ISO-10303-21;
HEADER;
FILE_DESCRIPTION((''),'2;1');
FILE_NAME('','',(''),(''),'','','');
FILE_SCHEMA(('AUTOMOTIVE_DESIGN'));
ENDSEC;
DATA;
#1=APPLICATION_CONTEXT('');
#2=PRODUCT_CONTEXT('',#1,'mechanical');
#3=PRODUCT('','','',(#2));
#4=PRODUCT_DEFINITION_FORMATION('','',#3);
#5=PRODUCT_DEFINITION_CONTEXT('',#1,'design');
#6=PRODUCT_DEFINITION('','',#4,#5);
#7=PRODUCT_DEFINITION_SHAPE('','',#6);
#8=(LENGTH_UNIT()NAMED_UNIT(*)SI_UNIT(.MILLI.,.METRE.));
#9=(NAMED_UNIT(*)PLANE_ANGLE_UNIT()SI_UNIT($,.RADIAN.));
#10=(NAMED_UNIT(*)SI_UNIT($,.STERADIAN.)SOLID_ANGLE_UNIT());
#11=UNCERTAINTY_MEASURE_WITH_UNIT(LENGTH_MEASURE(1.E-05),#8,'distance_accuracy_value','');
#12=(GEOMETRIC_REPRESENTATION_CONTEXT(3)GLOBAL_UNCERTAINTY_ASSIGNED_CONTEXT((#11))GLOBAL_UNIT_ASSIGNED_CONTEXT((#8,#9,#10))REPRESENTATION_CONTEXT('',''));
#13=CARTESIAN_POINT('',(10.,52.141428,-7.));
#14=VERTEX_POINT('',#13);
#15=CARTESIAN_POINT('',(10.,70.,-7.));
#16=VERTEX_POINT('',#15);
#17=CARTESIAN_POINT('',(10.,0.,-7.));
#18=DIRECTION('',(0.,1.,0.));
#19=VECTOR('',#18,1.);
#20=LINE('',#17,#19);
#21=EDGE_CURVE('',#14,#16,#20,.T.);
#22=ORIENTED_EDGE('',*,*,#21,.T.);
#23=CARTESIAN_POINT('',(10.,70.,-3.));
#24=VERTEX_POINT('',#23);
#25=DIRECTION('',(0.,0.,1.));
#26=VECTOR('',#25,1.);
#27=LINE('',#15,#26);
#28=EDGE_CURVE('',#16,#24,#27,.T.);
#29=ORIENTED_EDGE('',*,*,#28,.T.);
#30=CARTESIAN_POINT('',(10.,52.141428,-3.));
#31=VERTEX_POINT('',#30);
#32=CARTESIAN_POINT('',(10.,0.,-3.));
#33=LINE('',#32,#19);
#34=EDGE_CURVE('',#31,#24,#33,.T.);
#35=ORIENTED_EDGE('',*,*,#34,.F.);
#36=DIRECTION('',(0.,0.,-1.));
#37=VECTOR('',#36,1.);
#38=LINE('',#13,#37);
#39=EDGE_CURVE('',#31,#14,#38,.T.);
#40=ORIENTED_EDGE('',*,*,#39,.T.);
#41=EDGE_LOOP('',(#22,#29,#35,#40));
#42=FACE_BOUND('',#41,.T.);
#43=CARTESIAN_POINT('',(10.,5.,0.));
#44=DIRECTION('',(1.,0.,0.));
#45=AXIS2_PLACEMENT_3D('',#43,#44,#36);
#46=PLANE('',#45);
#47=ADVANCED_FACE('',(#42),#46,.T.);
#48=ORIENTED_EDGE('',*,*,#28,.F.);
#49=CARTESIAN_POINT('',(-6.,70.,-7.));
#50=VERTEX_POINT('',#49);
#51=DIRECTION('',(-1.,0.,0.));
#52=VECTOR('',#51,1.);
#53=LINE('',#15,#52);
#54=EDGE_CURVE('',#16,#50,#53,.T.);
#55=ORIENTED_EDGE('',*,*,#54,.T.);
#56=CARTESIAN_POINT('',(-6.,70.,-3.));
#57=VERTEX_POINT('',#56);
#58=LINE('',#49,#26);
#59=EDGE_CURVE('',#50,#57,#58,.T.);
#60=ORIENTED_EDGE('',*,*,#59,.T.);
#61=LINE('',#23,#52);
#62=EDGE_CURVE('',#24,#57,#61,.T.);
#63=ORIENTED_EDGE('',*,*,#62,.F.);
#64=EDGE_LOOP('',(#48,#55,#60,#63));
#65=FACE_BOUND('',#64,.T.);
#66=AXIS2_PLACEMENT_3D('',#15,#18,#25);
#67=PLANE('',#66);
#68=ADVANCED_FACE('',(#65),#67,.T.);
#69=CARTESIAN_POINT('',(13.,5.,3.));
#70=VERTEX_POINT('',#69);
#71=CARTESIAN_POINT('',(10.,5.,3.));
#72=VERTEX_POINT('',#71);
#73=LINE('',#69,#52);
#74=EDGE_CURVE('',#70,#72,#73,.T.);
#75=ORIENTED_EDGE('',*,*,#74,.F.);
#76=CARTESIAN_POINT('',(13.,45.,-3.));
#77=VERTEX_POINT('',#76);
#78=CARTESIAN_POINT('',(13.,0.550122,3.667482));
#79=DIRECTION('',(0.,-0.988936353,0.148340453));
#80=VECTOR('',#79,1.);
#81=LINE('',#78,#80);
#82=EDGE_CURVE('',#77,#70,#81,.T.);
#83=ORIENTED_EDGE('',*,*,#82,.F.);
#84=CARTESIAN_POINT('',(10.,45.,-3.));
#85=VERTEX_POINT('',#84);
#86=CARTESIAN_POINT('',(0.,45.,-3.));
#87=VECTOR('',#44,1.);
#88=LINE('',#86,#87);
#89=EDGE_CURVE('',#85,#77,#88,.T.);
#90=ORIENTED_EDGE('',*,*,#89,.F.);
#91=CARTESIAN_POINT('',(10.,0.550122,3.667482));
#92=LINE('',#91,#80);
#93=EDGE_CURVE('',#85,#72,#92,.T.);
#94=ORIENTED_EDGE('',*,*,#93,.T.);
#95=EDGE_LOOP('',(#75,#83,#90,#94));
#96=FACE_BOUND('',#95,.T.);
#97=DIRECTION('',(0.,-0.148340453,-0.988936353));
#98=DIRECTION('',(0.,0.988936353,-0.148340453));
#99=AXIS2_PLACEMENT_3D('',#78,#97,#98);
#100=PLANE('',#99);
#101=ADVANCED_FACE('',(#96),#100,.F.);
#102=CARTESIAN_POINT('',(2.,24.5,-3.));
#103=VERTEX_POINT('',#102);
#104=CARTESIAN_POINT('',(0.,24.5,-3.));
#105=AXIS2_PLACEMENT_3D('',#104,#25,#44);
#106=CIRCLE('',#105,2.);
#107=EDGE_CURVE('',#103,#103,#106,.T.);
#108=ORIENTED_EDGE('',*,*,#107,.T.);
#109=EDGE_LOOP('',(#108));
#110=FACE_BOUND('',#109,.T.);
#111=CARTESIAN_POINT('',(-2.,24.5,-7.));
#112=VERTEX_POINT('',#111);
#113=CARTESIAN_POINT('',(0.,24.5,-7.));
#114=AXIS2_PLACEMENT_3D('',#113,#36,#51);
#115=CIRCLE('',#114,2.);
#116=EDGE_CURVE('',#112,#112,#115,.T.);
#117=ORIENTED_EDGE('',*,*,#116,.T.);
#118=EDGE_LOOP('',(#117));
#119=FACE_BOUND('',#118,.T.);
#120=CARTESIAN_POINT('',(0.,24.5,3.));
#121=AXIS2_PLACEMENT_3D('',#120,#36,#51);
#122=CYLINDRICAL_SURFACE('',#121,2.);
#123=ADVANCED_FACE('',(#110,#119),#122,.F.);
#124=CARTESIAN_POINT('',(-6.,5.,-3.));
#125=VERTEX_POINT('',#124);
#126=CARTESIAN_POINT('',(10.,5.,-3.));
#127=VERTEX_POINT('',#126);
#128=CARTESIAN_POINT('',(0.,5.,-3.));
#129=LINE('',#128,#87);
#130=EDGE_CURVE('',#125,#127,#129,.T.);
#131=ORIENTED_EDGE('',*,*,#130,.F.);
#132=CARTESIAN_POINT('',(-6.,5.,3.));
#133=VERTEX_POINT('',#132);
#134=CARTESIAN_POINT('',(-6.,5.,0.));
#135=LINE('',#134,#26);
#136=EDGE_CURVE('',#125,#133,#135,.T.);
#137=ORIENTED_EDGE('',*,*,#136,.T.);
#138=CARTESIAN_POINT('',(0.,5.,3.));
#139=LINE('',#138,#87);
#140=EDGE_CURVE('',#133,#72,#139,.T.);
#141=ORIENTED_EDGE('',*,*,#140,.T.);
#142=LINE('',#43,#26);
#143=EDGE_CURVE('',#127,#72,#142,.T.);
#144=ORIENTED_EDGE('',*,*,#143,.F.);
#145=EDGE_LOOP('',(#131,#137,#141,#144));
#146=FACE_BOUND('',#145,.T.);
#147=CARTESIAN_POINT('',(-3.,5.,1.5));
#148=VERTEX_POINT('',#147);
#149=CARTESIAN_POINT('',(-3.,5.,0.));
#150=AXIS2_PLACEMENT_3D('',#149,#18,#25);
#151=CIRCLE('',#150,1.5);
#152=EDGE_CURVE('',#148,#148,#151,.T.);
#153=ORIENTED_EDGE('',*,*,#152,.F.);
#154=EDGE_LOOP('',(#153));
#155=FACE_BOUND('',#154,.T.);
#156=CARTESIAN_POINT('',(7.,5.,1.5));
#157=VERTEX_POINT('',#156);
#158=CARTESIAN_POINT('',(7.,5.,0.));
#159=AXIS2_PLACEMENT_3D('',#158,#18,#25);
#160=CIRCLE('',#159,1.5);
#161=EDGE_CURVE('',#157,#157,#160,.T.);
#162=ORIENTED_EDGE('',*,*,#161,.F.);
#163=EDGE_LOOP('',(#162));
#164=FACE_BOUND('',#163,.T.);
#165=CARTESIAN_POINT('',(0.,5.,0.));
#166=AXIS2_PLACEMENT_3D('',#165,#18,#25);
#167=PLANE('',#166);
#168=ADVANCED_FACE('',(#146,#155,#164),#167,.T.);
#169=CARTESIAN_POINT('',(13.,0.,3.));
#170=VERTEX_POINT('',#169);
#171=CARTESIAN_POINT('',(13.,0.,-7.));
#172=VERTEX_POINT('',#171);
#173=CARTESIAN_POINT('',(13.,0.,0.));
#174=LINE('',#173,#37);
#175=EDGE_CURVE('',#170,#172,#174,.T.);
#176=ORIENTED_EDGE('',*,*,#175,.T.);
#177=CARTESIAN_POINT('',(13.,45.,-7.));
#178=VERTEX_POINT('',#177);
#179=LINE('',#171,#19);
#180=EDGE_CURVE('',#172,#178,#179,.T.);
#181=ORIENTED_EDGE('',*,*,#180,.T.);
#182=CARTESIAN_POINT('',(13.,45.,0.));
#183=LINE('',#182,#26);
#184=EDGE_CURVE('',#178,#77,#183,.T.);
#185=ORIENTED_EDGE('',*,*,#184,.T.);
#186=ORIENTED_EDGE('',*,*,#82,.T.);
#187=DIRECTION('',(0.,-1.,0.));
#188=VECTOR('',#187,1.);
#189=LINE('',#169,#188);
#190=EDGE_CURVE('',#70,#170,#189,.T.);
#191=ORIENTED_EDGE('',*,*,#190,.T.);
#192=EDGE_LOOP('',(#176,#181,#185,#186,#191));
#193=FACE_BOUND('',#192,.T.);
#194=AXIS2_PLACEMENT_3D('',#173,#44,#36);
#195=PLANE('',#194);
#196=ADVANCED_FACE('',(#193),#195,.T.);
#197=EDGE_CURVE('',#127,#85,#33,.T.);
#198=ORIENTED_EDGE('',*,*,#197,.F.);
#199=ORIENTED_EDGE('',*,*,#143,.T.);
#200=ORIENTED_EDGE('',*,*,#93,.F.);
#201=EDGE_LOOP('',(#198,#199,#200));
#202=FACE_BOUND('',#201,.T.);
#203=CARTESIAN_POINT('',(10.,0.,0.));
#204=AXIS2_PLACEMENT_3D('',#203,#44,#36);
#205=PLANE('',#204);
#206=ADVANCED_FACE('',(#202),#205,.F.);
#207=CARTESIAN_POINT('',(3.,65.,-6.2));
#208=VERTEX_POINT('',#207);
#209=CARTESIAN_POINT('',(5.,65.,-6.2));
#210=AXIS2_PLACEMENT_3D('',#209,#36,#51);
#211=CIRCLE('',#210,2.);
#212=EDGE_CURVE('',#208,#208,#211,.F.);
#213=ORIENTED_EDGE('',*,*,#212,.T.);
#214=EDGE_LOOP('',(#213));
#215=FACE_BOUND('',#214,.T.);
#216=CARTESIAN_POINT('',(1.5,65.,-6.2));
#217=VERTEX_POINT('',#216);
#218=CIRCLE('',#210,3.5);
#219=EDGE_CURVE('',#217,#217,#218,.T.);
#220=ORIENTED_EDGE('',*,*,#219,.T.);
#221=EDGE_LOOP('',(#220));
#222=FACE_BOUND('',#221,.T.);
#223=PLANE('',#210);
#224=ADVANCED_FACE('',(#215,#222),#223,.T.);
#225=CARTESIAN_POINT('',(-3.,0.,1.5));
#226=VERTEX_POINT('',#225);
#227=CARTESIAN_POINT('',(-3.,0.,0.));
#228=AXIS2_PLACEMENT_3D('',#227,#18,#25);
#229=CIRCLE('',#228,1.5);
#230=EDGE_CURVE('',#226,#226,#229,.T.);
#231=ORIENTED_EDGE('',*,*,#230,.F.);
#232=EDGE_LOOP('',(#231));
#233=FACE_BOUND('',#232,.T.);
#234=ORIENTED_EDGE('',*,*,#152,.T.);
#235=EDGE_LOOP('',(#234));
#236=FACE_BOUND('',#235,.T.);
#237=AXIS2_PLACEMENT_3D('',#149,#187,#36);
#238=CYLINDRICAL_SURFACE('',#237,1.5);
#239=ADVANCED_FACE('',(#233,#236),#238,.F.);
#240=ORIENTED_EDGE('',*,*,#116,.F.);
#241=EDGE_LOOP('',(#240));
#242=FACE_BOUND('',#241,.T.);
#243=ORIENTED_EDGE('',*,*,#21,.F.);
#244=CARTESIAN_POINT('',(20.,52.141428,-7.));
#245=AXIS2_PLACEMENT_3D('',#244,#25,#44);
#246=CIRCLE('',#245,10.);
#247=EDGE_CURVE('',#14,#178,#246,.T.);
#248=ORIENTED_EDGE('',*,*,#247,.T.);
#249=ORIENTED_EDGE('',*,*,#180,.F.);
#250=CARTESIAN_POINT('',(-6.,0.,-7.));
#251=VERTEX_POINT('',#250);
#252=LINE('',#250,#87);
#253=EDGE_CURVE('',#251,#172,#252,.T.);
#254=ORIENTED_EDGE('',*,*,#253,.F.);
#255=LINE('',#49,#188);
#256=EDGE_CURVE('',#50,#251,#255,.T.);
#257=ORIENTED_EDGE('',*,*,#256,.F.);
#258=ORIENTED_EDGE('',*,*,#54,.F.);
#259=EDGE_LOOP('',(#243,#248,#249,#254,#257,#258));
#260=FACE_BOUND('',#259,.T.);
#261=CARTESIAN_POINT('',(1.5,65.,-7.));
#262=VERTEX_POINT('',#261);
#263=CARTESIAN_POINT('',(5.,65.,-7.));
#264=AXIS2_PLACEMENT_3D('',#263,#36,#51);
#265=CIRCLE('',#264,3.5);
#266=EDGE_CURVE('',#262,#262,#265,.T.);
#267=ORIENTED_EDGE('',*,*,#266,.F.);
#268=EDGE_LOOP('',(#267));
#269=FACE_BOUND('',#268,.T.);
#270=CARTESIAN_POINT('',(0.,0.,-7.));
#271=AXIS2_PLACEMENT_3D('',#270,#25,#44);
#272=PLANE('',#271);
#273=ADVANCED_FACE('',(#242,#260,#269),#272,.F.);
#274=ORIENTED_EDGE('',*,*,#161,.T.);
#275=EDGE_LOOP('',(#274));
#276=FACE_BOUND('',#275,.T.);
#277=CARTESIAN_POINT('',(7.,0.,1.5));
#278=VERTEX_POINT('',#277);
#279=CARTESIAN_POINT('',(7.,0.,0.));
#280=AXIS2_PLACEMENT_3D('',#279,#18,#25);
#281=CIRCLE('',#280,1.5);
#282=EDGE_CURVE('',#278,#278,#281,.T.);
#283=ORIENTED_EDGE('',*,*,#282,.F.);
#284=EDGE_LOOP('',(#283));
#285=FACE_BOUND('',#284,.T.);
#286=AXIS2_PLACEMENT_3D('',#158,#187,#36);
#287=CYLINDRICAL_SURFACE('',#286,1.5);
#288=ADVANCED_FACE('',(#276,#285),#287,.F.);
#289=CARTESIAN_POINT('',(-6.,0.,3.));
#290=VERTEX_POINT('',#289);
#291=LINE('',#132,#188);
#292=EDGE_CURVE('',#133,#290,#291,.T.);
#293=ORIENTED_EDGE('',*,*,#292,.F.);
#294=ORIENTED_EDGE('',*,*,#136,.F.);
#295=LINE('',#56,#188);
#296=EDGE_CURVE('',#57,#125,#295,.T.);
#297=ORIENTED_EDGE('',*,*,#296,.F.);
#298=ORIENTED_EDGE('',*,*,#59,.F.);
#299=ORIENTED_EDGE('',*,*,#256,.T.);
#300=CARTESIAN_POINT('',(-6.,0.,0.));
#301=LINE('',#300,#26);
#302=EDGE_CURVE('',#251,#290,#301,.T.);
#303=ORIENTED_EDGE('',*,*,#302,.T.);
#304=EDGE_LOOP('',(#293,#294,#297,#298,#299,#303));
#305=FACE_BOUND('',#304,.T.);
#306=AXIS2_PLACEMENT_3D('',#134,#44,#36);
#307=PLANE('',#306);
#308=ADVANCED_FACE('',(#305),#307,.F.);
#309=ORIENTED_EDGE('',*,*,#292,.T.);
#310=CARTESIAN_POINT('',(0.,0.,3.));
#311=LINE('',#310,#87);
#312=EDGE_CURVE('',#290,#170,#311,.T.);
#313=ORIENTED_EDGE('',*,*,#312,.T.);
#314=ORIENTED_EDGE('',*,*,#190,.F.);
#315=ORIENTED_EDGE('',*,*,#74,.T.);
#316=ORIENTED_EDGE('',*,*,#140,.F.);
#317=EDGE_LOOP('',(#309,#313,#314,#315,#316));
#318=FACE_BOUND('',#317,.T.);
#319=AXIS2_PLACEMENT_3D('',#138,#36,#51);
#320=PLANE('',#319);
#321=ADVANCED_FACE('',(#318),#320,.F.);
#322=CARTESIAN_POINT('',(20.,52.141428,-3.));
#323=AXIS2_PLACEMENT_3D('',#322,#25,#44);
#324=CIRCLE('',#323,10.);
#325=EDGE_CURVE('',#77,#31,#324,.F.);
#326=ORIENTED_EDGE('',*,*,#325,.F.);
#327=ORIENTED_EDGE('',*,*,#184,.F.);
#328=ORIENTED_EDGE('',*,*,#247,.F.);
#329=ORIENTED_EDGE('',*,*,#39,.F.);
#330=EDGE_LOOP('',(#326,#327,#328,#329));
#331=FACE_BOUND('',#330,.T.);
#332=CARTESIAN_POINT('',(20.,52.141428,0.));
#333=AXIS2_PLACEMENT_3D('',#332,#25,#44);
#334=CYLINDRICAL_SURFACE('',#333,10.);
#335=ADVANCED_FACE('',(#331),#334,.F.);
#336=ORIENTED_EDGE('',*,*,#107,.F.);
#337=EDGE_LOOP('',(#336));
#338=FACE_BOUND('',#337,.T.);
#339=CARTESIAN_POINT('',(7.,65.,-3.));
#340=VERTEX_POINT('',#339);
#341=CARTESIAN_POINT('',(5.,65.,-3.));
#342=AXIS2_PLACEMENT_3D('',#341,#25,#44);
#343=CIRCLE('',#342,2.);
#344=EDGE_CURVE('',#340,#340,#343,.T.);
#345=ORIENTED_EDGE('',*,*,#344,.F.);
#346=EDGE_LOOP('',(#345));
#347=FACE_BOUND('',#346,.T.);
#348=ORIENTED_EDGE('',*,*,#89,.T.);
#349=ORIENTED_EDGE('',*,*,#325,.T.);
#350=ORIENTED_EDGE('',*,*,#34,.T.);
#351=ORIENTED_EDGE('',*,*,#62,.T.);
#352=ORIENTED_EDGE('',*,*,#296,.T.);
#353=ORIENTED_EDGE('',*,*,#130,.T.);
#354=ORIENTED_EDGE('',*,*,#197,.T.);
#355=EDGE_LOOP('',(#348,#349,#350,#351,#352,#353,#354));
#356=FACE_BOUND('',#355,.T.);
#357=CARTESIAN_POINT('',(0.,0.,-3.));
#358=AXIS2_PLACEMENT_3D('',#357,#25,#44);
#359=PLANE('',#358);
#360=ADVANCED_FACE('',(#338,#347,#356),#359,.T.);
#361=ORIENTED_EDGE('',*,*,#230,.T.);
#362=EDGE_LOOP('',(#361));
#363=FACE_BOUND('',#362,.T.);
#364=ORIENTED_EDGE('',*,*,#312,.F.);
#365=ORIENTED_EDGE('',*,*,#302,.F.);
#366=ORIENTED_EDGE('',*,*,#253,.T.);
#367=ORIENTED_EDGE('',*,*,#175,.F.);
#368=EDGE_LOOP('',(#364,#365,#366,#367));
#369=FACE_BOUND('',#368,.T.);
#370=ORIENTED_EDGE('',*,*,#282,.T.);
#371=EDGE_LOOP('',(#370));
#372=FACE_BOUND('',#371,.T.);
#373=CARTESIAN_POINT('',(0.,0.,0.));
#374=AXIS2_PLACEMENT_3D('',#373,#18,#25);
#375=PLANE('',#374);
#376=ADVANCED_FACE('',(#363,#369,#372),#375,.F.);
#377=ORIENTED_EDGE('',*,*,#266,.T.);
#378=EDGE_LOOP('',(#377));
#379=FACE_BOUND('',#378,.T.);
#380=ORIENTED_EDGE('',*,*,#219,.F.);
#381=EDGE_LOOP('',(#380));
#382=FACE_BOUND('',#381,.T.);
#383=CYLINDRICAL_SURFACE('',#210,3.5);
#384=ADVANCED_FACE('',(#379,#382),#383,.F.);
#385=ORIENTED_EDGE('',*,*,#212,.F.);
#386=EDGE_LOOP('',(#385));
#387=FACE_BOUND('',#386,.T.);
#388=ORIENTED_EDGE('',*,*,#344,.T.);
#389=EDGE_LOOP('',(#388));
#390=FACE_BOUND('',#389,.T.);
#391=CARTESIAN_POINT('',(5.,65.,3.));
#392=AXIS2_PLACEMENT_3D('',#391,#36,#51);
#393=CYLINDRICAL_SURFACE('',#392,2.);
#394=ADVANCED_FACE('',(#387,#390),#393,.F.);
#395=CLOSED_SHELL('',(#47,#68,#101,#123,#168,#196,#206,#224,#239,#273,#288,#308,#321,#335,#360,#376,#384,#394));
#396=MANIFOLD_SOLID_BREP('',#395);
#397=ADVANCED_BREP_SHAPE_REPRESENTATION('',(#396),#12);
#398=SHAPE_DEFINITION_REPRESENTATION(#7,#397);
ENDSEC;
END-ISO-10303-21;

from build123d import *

# Parameters (mm, degrees)
SKETCH_1_W          = 16
SKETCH_1_H          = 6
SKETCH_1_R          = 1.5
EXTRUDE_1_DEPTH     = 5
SKETCH_2_W          = 16
SKETCH_2_H          = 70
EXTRUDE_2_DEPTH     = 4
SKETCH_3_R          = 2
CUT_EXTRUDE_1_DEPTH = 72.414284285
SKETCH_4_R          = 2
CUT_EXTRUDE_2_DEPTH = 72.414284285
SKETCH_5_R          = 3.5
CUT_EXTRUDE_3_DEPTH = 0.8
EXTRUDE_3_DEPTH     = 3
FILLET_1_R          = 10


with BuildPart() as part:
    # 草图1 → 凸台-拉伸1 (new body)
    with BuildSketch(Plane(origin=(0, 0, 0), x_dir=(1, 0, 0), z_dir=(0, 1, 0))):
        with Locations((2, 0)):
            Rectangle(SKETCH_1_W, SKETCH_1_H)
        with Locations(Location((-3, 0, 0), (0, 0, 270))):
            Circle(SKETCH_1_R, mode=Mode.SUBTRACT)
        with Locations(Location((7, 0, 0), (0, 0, 270))):
            Circle(SKETCH_1_R, mode=Mode.SUBTRACT)
    extrude(amount=EXTRUDE_1_DEPTH)

    # 草图2 → 凸台-拉伸2 (add)
    with BuildSketch(Plane(origin=(0, 0, -3), x_dir=(-1, 0, 0), z_dir=(0, 0, -1))):
        with Locations((-2, 35)):
            Rectangle(SKETCH_2_W, SKETCH_2_H)
    extrude(amount=EXTRUDE_2_DEPTH)

    # 草图3 → 切除-拉伸1 (cut, through all)
    with BuildSketch(Plane(origin=(0, 0, -7), x_dir=(-1, 0, 0), z_dir=(0, 0, -1))):
        with Locations((-5, 65)):
            Circle(SKETCH_3_R)
    extrude(amount=-CUT_EXTRUDE_1_DEPTH, mode=Mode.SUBTRACT)

    # 草图4 → 切除-拉伸2 (cut, through all)
    with BuildSketch(Plane(origin=(0, 0, -7), x_dir=(-1, 0, 0), z_dir=(0, 0, -1))):
        with Locations((0, 24.5)):
            Circle(SKETCH_4_R)
    extrude(amount=-CUT_EXTRUDE_2_DEPTH, mode=Mode.SUBTRACT)

    # 草图5 → 切除-拉伸3 (cut)
    with BuildSketch(Plane(origin=(0, 0, -7), x_dir=(-1, 0, 0), z_dir=(0, 0, -1))):
        with Locations((-5, 65)):
            Circle(SKETCH_5_R)
    extrude(amount=-CUT_EXTRUDE_3_DEPTH, mode=Mode.SUBTRACT)

    # 草图6 → 凸台-拉伸3 (add)
    with BuildSketch(Plane(origin=(10, 0, 0), x_dir=(0, 0, -1), z_dir=(1, 0, 0))):
        Polygon((3, 5), (-3, 5), (-3, 0), (7, 0), (7, 45), (3, 45), align=None)
        Polygon((3, 45), (-3, 5), (3, 5), align=None)
    extrude(amount=EXTRUDE_3_DEPTH)

    # 圆角1
    # the kernel refuses this fillet: 10 mm, written as the material it adds along each edge
    with BuildSketch(Plane(origin=(10, 45, -7), x_dir=(0, 1, 0), z_dir=(0, 0, 1))) as fillet_1_piece_1:
        with BuildLine():
            CenterArc((7.141428429, -10), FILLET_1_R, 90, 45.572995999)
            Line((0, -3), (0, 0))
            Line((0, 0), (7.141428429, 0))
        make_face()
    extrude(amount=4)


solid = part.part
